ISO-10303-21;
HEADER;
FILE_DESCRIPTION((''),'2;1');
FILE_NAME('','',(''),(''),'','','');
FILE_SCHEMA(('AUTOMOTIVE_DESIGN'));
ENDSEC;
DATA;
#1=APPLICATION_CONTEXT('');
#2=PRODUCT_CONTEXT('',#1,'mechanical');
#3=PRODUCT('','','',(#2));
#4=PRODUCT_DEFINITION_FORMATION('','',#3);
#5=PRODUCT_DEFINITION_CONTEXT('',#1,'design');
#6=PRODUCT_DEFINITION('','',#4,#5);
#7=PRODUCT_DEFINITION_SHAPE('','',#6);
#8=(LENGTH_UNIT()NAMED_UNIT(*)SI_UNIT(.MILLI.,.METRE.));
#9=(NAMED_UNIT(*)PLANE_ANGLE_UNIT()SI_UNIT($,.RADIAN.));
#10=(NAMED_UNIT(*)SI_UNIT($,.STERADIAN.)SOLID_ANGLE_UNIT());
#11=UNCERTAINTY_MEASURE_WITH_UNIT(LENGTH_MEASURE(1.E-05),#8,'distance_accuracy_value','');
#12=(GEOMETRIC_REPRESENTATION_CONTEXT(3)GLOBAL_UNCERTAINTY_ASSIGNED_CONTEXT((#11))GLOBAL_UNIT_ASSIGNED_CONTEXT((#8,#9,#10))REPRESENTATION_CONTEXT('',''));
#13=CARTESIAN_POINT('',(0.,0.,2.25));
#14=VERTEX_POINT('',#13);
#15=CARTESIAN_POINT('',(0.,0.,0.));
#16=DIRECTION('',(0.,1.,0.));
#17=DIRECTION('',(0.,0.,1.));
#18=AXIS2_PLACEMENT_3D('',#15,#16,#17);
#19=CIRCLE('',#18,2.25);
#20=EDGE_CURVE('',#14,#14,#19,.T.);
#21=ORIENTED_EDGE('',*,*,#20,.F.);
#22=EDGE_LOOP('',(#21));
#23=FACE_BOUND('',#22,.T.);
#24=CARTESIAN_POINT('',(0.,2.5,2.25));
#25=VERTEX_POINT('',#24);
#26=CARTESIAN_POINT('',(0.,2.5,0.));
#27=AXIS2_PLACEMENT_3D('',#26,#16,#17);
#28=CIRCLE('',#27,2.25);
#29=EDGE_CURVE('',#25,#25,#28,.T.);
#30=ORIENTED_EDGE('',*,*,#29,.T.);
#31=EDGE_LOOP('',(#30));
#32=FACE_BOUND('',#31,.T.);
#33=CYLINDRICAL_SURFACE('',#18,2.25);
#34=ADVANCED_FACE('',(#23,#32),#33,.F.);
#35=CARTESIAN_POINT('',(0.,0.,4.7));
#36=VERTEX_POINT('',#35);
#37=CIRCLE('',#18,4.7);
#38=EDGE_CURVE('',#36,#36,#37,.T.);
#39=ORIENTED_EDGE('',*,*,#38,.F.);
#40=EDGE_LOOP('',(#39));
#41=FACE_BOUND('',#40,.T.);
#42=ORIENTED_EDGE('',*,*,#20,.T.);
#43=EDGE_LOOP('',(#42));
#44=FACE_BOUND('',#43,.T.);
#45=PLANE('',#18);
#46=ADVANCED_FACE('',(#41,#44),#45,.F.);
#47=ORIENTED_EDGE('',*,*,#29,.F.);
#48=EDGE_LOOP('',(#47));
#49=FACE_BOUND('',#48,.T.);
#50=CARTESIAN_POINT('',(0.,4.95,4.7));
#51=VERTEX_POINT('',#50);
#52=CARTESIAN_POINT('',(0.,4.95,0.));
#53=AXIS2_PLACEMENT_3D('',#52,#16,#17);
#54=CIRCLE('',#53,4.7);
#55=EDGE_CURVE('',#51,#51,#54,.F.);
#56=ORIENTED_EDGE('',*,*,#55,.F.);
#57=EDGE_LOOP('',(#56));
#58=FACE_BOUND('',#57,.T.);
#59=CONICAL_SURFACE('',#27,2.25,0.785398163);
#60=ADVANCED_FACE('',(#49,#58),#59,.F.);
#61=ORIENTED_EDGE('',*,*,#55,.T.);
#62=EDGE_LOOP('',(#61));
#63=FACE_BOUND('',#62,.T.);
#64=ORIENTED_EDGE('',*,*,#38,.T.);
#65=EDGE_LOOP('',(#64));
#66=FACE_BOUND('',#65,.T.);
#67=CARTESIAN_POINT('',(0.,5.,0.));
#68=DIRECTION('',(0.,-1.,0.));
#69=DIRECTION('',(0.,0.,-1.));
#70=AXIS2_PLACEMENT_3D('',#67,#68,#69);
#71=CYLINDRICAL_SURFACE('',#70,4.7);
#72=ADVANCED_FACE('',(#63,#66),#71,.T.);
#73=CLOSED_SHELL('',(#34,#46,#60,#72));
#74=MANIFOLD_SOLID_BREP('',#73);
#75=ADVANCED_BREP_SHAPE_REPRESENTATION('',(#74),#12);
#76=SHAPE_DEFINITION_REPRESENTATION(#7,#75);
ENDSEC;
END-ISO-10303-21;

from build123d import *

# Parameters (mm, degrees)
SKETCH1_R           = 4.7
BOSS_EXTRUDE1_DEPTH = 5
SKETCH2_R           = 2.25
CUT_EXTRUDE1_DEPTH  = 9.317451533
CHAMFER1_SIZE       = 2.5


with BuildPart() as part:
    # Sketch1 → Boss-Extrude1 (new body)
    with BuildSketch(Plane(origin=(0, 0, 0), x_dir=(1, 0, 0), z_dir=(0, 1, 0))):
        with Locations(Location((0, 0, 0), (0, 0, 270))):
            Circle(SKETCH1_R)
    extrude(amount=BOSS_EXTRUDE1_DEPTH)

    # Sketch2 → Cut-Extrude1 (cut, through all)
    with BuildSketch(Plane(origin=(0, 5, 0), x_dir=(1, 0, 0), z_dir=(0, 1, 0))):
        with Locations(Location((0, 0, 0), (0, 0, 270))):
            Circle(SKETCH2_R)
    extrude(amount=-CUT_EXTRUDE1_DEPTH, mode=Mode.SUBTRACT)

    # Chamfer1
    # the kernel refuses this chamfer: 2.5 mm, written as the material it takes off along each edge
    with BuildSketch(Plane(origin=(0, 5, 0), x_dir=(0, 0, 1), z_dir=(-1, 0, 0))) as chamfer1_piece_1:
        Polygon((2.25 + CHAMFER1_SIZE, 0), (2.25, -CHAMFER1_SIZE), (2.25, 0), align=None)
    revolve(axis=Axis((0, 5, 0), (0, 1, 0)), mode=Mode.SUBTRACT)


solid = part.part
